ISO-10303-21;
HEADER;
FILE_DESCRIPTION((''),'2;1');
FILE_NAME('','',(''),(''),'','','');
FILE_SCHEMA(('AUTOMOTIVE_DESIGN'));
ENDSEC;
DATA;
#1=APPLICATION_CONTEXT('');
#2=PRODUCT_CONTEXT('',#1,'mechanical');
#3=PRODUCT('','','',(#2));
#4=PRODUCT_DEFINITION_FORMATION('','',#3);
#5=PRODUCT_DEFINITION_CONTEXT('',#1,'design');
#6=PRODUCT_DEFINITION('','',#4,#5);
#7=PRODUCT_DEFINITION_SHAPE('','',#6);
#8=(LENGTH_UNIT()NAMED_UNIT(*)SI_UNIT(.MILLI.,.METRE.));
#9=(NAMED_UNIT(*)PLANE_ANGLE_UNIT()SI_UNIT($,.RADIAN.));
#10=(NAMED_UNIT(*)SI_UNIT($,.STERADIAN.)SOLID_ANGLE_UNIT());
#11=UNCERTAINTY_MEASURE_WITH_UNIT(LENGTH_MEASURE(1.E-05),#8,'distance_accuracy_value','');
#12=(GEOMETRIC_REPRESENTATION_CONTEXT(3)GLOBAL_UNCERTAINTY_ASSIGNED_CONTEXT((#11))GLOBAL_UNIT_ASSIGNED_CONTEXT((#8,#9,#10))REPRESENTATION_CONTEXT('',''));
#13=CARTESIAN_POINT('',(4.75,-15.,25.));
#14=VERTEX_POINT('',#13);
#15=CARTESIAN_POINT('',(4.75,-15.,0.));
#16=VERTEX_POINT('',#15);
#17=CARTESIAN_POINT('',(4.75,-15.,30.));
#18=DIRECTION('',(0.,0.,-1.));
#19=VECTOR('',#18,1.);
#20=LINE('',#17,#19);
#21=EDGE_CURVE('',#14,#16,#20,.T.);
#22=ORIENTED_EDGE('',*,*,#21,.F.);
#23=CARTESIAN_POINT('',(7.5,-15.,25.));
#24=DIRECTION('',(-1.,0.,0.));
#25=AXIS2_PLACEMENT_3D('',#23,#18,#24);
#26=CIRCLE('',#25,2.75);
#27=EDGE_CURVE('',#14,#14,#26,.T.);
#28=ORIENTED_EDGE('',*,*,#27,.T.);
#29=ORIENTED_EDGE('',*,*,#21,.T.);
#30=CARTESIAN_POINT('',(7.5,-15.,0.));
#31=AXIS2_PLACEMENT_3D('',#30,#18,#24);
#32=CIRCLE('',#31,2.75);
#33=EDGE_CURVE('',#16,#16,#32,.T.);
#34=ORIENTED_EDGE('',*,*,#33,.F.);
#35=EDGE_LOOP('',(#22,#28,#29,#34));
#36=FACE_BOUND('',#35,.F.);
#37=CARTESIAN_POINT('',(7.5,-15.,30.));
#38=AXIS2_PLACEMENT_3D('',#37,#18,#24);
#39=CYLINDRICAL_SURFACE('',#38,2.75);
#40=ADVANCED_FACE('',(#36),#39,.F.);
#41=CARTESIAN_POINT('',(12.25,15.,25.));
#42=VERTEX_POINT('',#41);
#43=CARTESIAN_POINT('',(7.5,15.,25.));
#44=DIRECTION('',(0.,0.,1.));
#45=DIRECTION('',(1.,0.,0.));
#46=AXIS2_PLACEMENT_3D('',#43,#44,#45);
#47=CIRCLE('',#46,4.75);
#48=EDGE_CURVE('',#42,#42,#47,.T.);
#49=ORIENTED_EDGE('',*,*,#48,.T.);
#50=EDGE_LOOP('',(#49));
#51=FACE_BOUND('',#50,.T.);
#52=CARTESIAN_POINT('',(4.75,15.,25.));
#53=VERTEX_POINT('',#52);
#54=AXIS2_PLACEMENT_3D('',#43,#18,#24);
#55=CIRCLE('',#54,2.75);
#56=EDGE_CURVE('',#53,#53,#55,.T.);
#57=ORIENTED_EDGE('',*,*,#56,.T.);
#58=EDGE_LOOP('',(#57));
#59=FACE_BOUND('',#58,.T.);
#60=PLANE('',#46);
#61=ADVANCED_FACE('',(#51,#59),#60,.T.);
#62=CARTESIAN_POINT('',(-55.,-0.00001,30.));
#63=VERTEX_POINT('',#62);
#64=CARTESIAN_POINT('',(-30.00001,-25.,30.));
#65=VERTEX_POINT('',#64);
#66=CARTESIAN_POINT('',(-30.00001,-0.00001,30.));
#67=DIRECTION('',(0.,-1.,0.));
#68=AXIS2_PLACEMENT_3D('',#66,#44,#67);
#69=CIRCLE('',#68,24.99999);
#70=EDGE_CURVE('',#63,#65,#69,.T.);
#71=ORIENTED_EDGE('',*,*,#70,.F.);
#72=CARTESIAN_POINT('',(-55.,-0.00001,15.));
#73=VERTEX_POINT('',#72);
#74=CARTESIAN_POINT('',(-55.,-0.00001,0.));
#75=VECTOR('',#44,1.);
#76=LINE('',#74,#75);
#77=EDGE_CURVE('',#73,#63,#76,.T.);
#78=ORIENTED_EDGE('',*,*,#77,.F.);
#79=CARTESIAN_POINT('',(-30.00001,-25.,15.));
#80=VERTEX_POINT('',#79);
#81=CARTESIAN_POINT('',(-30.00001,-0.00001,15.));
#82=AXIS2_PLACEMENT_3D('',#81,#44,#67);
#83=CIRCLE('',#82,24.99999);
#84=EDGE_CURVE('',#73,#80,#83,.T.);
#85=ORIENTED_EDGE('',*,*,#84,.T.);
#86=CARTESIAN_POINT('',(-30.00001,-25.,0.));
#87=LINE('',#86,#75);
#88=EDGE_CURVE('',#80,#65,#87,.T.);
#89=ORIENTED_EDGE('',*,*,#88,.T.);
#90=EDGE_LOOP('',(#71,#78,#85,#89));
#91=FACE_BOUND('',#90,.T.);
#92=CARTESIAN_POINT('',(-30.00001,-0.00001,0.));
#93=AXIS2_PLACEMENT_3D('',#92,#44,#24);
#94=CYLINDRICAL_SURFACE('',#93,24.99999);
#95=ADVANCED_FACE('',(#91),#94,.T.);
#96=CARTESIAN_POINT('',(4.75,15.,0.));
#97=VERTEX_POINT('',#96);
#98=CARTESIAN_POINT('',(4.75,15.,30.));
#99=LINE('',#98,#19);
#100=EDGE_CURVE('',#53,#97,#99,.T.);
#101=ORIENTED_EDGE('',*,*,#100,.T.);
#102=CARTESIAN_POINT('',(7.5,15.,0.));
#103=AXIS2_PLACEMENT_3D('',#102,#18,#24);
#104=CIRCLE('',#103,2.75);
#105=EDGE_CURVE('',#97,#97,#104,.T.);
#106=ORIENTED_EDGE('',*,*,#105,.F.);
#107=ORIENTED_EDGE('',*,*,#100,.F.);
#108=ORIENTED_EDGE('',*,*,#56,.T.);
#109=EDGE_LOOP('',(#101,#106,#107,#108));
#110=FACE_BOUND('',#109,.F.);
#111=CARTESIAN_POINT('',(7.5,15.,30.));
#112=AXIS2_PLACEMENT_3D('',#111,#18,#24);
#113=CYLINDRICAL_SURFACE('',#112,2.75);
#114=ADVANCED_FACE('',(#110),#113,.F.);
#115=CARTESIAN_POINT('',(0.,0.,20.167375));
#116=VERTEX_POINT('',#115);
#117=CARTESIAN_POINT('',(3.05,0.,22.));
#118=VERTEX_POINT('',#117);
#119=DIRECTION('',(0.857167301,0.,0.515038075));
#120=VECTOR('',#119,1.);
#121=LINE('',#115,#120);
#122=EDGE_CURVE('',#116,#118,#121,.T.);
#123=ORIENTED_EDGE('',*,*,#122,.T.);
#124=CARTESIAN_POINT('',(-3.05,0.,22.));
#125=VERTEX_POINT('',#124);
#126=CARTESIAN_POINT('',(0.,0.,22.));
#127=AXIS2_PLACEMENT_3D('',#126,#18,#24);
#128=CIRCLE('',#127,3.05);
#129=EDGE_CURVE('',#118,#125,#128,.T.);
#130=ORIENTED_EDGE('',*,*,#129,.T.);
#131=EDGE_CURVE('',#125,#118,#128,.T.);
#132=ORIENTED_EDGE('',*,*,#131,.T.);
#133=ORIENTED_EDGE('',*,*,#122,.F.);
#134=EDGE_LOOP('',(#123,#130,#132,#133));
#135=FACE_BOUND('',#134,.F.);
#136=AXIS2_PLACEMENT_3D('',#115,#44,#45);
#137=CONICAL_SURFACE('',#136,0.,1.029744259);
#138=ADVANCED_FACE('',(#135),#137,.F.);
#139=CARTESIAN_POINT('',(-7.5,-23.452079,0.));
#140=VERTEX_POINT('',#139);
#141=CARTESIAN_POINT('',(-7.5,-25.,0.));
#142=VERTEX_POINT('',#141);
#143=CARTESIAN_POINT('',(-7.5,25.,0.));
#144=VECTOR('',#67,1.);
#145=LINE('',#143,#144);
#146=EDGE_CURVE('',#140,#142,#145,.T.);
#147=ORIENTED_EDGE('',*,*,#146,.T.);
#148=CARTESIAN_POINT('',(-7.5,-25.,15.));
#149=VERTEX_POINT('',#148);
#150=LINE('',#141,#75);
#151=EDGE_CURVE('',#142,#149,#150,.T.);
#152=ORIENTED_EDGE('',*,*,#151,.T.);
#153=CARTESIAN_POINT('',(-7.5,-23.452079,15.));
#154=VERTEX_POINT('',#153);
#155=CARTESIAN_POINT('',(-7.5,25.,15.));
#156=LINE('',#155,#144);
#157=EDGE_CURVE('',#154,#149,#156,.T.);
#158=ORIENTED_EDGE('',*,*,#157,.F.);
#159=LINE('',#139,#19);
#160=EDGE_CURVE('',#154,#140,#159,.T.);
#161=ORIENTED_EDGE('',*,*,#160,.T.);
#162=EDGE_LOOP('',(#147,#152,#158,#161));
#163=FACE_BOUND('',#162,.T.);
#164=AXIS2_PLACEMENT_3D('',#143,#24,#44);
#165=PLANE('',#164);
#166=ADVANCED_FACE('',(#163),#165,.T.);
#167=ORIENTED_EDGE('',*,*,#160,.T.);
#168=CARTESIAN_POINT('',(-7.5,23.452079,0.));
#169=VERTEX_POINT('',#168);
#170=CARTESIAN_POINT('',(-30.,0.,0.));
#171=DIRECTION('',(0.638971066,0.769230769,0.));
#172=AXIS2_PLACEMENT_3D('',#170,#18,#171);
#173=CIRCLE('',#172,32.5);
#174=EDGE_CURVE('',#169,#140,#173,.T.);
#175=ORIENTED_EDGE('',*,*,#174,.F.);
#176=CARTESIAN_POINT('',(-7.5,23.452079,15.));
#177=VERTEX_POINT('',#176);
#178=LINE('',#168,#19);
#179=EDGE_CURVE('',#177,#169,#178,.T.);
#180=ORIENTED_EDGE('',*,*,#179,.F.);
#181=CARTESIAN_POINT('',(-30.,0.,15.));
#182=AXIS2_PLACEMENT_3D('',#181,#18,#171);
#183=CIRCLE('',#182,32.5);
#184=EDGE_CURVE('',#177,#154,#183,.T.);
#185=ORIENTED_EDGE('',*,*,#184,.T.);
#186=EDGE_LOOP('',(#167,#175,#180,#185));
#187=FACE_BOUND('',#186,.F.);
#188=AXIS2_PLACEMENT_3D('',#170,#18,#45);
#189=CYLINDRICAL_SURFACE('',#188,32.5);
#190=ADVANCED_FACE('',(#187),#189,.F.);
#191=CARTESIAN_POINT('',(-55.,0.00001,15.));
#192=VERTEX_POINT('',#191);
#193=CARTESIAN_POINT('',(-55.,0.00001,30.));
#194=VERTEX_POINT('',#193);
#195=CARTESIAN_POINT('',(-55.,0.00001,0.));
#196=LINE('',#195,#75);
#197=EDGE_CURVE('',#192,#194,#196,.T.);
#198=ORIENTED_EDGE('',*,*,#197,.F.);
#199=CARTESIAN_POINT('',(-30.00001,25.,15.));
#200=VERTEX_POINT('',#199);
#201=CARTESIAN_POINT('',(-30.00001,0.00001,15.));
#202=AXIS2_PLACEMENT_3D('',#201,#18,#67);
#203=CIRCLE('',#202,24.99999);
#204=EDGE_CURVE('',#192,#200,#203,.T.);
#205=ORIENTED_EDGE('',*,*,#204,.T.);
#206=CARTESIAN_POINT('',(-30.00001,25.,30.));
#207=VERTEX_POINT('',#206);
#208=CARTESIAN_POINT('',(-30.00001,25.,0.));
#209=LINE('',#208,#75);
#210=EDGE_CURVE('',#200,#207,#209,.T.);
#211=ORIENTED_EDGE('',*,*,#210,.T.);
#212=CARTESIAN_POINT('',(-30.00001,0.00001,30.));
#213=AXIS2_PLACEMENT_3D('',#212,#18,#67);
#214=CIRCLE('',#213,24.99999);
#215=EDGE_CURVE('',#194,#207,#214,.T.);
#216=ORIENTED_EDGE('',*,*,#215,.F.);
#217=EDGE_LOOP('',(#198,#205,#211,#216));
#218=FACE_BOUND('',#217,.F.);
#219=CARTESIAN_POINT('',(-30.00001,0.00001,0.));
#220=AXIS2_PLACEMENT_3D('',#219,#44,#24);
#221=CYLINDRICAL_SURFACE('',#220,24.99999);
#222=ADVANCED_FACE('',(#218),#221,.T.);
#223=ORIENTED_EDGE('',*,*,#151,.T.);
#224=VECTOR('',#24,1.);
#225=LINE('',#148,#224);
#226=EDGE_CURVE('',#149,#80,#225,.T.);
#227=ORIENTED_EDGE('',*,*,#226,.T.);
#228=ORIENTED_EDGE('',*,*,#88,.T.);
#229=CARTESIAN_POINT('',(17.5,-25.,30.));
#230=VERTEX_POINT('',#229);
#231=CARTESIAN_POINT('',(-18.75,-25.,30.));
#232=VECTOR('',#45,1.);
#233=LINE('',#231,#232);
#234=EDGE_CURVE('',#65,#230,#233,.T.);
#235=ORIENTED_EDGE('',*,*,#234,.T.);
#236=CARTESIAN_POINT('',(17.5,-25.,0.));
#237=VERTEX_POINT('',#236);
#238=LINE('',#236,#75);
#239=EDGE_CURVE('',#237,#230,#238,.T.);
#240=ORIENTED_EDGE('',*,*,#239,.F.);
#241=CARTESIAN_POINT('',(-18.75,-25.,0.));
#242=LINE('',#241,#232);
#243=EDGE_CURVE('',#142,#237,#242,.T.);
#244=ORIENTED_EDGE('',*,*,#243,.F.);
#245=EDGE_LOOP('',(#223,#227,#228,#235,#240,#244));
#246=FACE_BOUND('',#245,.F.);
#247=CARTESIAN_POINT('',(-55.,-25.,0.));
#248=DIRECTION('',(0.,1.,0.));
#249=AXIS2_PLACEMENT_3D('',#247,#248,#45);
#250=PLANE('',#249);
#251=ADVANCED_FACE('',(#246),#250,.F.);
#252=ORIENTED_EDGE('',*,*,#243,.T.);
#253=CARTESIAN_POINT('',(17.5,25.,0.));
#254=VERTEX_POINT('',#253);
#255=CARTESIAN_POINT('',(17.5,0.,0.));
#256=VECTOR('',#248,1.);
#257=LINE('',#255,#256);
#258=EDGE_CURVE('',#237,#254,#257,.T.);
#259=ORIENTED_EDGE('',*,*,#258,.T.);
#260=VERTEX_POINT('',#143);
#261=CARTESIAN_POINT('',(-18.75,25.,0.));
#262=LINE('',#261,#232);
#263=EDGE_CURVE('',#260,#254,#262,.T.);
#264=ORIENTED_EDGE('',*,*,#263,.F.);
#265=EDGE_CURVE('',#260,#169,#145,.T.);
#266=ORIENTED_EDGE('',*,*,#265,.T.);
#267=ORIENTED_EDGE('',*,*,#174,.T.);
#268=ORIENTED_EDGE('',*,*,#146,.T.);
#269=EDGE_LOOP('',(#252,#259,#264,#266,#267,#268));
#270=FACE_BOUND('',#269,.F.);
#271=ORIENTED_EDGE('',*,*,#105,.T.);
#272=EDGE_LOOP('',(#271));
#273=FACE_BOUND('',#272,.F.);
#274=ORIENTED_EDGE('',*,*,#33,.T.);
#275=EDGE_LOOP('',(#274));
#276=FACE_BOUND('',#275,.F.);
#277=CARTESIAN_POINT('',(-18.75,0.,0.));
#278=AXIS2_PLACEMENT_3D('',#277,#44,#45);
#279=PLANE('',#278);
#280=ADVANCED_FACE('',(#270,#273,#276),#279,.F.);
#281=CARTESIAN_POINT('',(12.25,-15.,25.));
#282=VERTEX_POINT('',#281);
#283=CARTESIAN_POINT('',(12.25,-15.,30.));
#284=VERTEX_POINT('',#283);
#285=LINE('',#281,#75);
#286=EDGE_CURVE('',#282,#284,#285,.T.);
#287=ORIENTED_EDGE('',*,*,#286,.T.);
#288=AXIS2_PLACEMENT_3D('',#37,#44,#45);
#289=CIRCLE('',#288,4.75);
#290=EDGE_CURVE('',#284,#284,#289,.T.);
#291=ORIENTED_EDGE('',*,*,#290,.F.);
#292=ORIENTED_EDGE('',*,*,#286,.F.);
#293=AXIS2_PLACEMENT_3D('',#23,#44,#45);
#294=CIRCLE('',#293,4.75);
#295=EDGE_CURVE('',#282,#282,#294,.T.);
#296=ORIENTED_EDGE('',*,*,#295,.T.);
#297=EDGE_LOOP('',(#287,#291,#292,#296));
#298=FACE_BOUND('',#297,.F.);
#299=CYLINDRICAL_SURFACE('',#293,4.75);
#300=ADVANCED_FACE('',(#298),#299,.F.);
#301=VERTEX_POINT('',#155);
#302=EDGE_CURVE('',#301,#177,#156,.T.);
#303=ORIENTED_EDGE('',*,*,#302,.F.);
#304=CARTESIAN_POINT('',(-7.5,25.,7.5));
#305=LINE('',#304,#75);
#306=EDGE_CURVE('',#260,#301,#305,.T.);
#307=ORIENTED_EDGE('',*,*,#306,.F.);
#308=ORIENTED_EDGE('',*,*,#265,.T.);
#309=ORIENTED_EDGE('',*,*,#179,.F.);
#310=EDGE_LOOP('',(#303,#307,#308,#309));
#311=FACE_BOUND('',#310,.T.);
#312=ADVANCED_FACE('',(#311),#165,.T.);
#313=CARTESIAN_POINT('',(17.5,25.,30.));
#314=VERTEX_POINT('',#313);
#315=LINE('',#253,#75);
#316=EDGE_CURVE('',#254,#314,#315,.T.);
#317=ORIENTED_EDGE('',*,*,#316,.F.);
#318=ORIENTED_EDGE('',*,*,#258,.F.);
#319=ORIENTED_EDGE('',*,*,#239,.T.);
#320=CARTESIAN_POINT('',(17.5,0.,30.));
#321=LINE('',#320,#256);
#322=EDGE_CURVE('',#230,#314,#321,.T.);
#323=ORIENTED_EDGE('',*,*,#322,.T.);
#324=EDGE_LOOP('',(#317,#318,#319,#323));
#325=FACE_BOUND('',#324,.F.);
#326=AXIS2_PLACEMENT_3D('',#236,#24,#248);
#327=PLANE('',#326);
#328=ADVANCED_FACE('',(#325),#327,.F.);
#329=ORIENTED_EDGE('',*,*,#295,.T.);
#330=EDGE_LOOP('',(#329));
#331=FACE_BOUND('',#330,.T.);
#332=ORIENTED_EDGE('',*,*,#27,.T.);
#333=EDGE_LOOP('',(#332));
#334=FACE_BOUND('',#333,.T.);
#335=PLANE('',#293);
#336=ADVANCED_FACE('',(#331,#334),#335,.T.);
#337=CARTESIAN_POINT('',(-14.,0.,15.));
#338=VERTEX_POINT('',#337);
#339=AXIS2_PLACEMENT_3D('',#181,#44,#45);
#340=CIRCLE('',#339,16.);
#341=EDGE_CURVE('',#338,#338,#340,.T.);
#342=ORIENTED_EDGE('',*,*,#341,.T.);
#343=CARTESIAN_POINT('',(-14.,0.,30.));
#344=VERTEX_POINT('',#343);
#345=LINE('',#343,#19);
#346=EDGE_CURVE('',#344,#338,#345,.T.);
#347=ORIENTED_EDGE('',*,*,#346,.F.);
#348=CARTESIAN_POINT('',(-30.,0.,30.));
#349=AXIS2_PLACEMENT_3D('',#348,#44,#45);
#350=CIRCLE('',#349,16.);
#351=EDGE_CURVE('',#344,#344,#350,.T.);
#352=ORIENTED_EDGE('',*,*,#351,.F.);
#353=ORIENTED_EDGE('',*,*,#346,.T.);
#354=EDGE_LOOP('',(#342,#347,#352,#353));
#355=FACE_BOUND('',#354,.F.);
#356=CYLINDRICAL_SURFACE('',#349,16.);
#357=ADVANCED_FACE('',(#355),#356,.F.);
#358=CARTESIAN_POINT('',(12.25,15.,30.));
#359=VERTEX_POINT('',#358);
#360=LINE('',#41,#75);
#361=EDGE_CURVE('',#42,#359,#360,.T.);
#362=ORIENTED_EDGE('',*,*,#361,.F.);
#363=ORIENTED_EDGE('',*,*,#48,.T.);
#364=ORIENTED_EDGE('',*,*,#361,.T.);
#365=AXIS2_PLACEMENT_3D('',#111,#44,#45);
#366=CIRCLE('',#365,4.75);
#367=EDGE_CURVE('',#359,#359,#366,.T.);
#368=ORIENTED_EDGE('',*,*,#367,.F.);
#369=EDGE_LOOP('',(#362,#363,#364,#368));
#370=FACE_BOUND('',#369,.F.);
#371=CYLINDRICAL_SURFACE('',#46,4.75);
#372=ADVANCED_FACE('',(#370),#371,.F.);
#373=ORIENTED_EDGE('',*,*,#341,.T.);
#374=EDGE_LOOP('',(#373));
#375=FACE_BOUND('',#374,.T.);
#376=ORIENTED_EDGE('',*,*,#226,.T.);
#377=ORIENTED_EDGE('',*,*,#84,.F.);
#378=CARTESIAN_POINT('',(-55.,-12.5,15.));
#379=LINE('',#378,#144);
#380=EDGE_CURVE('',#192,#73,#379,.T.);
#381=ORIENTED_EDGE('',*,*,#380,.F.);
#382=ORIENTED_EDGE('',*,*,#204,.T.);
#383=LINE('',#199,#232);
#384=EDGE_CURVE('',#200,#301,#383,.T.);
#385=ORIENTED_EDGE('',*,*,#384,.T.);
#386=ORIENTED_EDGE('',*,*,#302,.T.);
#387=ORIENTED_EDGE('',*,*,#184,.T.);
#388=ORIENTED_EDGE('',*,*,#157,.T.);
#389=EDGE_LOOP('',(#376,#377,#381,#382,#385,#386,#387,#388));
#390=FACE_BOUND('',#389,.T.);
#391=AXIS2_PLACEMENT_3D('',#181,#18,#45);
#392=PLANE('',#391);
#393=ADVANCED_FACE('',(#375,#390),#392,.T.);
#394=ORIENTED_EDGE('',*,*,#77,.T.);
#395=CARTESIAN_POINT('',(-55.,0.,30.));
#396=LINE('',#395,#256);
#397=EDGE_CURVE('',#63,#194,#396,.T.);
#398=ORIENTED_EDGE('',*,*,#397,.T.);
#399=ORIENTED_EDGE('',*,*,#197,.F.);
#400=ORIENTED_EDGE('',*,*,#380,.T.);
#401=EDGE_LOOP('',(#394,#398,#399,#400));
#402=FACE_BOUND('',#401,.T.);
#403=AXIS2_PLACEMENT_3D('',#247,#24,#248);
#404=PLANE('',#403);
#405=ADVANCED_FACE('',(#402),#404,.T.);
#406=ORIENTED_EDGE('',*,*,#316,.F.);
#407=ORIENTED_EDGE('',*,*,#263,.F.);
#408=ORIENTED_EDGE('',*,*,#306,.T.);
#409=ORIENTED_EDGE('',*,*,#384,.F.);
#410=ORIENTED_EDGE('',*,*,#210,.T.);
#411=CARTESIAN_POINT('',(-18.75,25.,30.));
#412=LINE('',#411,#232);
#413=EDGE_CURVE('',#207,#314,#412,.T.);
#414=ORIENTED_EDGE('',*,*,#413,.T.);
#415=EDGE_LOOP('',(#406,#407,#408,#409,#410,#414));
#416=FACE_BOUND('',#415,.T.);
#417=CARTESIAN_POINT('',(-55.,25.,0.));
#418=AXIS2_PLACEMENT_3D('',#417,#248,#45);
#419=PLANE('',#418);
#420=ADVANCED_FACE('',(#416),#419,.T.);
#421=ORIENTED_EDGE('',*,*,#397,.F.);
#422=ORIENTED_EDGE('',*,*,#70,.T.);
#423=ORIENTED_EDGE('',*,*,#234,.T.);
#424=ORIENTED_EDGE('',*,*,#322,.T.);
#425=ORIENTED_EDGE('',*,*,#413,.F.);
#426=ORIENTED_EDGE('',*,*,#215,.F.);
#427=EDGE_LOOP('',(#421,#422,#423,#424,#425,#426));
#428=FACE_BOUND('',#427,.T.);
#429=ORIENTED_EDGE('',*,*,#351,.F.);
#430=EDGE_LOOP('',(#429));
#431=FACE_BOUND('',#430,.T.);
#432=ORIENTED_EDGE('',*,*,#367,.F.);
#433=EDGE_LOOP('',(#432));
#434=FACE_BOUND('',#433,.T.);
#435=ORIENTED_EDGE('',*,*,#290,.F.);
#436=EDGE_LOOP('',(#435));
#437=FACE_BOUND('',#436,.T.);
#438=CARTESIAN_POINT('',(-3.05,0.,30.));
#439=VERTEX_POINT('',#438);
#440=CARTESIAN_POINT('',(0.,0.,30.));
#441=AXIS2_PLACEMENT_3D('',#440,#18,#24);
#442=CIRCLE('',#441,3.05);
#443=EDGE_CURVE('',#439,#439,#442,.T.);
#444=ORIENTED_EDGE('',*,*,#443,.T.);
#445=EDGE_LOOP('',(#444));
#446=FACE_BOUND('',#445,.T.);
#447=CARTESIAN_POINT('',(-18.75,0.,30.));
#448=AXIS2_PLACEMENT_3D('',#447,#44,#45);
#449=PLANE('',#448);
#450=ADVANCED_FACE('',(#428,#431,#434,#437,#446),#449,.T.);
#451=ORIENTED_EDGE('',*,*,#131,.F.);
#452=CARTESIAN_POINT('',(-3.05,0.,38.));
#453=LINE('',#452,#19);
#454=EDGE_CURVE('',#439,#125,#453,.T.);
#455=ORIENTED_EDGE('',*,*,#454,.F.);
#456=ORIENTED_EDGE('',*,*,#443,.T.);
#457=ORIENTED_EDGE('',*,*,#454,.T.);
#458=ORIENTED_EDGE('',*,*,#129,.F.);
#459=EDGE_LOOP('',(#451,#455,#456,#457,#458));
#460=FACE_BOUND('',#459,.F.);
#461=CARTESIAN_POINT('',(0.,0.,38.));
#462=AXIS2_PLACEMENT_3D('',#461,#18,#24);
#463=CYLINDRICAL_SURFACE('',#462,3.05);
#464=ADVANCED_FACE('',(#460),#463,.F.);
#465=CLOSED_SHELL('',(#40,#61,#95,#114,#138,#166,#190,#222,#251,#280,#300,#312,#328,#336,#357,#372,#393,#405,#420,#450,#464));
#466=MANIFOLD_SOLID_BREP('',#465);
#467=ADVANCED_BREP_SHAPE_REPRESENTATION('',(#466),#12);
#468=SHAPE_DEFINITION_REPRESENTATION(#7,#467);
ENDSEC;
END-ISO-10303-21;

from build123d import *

# Parameters (mm, degrees)
F0_W            = 72.5
F0_H            = 50
F1_DEPTH        = 30
F2_R            = 16
F3_DEPTH        = 30.001
F5_D            = 6.1
F5_DEPTH        = 8
F5_TIP          = 1.832624888
F6_R            = 32.5
F7_DEPTH        = 15
F8_R            = 24.99999
F10_D           = 5.5
F10_CBORE_D     = 9.5
F10_CBORE_DEPTH = 5
F11_W           = 1.7334403427
F11_H           = 15
F12_DEPTH       = 50.001


# Not quite as in the source:
# - a fillet or chamfer is up to 0.001 mm smaller than in the source, because OpenCascade refuses the exact size


with BuildPart() as f1:
    # F0 (on Top) → F1 (new body)
    with BuildSketch(Plane.XY):
        with Locations((-18.75, 0)):
            Rectangle(F0_W, F0_H)
    extrude(amount=F1_DEPTH)

    # F2 (on face) → F3 (cut, through all)
    with BuildSketch(Plane.XY.offset(30)):
        with Locations((-30, 0)):
            Circle(F2_R)
    extrude(amount=-F3_DEPTH, mode=Mode.SUBTRACT)

    # F5
    with Locations(Plane.XY.offset(30)):
        with Locations((0, 0)):
            Hole(F5_D / 2, depth=F5_DEPTH)
            with Locations((0, 0, -(F5_DEPTH + F5_TIP / 2))):  # 118° drill point
                Cone(0, F5_D / 2, F5_TIP, mode=Mode.SUBTRACT)

    # F6 (on face) → F7 (cut)
    with BuildSketch(Plane(origin=(0, 0, 0), x_dir=(1, 0, 0), z_dir=(0, 0, -1))):
        with Locations((-30, 0)):
            Circle(F6_R)
    extrude(amount=-F7_DEPTH, mode=Mode.SUBTRACT)

    # F8 (radius 25 in the source; OpenCascade refuses exactly that, so slightly less here)
    f8_edges = [f1.edges().sort_by_distance(p)[0] for p in [
        (-55, -25, 15),
        (-55, 25, 15),
    ]]
    fillet(f8_edges, radius=F8_R)

    # F10 (through all)
    with Locations(Plane.XY.offset(30)):
        with Locations((7.5, 15), (7.5, -15)):
            CounterBoreHole(F10_D / 2, F10_CBORE_D / 2, F10_CBORE_DEPTH)

    # F11 (on face) → F12 (cut, through all)
    with BuildSketch(Plane(origin=(0, 25, 0), x_dir=(-1, 0, 0), z_dir=(0, 1, 0))):
        with Locations((8.3667201714, 7.5)):
            Rectangle(F11_W, F11_H)
    extrude(amount=-F12_DEPTH, mode=Mode.SUBTRACT)


solid = f1.part
